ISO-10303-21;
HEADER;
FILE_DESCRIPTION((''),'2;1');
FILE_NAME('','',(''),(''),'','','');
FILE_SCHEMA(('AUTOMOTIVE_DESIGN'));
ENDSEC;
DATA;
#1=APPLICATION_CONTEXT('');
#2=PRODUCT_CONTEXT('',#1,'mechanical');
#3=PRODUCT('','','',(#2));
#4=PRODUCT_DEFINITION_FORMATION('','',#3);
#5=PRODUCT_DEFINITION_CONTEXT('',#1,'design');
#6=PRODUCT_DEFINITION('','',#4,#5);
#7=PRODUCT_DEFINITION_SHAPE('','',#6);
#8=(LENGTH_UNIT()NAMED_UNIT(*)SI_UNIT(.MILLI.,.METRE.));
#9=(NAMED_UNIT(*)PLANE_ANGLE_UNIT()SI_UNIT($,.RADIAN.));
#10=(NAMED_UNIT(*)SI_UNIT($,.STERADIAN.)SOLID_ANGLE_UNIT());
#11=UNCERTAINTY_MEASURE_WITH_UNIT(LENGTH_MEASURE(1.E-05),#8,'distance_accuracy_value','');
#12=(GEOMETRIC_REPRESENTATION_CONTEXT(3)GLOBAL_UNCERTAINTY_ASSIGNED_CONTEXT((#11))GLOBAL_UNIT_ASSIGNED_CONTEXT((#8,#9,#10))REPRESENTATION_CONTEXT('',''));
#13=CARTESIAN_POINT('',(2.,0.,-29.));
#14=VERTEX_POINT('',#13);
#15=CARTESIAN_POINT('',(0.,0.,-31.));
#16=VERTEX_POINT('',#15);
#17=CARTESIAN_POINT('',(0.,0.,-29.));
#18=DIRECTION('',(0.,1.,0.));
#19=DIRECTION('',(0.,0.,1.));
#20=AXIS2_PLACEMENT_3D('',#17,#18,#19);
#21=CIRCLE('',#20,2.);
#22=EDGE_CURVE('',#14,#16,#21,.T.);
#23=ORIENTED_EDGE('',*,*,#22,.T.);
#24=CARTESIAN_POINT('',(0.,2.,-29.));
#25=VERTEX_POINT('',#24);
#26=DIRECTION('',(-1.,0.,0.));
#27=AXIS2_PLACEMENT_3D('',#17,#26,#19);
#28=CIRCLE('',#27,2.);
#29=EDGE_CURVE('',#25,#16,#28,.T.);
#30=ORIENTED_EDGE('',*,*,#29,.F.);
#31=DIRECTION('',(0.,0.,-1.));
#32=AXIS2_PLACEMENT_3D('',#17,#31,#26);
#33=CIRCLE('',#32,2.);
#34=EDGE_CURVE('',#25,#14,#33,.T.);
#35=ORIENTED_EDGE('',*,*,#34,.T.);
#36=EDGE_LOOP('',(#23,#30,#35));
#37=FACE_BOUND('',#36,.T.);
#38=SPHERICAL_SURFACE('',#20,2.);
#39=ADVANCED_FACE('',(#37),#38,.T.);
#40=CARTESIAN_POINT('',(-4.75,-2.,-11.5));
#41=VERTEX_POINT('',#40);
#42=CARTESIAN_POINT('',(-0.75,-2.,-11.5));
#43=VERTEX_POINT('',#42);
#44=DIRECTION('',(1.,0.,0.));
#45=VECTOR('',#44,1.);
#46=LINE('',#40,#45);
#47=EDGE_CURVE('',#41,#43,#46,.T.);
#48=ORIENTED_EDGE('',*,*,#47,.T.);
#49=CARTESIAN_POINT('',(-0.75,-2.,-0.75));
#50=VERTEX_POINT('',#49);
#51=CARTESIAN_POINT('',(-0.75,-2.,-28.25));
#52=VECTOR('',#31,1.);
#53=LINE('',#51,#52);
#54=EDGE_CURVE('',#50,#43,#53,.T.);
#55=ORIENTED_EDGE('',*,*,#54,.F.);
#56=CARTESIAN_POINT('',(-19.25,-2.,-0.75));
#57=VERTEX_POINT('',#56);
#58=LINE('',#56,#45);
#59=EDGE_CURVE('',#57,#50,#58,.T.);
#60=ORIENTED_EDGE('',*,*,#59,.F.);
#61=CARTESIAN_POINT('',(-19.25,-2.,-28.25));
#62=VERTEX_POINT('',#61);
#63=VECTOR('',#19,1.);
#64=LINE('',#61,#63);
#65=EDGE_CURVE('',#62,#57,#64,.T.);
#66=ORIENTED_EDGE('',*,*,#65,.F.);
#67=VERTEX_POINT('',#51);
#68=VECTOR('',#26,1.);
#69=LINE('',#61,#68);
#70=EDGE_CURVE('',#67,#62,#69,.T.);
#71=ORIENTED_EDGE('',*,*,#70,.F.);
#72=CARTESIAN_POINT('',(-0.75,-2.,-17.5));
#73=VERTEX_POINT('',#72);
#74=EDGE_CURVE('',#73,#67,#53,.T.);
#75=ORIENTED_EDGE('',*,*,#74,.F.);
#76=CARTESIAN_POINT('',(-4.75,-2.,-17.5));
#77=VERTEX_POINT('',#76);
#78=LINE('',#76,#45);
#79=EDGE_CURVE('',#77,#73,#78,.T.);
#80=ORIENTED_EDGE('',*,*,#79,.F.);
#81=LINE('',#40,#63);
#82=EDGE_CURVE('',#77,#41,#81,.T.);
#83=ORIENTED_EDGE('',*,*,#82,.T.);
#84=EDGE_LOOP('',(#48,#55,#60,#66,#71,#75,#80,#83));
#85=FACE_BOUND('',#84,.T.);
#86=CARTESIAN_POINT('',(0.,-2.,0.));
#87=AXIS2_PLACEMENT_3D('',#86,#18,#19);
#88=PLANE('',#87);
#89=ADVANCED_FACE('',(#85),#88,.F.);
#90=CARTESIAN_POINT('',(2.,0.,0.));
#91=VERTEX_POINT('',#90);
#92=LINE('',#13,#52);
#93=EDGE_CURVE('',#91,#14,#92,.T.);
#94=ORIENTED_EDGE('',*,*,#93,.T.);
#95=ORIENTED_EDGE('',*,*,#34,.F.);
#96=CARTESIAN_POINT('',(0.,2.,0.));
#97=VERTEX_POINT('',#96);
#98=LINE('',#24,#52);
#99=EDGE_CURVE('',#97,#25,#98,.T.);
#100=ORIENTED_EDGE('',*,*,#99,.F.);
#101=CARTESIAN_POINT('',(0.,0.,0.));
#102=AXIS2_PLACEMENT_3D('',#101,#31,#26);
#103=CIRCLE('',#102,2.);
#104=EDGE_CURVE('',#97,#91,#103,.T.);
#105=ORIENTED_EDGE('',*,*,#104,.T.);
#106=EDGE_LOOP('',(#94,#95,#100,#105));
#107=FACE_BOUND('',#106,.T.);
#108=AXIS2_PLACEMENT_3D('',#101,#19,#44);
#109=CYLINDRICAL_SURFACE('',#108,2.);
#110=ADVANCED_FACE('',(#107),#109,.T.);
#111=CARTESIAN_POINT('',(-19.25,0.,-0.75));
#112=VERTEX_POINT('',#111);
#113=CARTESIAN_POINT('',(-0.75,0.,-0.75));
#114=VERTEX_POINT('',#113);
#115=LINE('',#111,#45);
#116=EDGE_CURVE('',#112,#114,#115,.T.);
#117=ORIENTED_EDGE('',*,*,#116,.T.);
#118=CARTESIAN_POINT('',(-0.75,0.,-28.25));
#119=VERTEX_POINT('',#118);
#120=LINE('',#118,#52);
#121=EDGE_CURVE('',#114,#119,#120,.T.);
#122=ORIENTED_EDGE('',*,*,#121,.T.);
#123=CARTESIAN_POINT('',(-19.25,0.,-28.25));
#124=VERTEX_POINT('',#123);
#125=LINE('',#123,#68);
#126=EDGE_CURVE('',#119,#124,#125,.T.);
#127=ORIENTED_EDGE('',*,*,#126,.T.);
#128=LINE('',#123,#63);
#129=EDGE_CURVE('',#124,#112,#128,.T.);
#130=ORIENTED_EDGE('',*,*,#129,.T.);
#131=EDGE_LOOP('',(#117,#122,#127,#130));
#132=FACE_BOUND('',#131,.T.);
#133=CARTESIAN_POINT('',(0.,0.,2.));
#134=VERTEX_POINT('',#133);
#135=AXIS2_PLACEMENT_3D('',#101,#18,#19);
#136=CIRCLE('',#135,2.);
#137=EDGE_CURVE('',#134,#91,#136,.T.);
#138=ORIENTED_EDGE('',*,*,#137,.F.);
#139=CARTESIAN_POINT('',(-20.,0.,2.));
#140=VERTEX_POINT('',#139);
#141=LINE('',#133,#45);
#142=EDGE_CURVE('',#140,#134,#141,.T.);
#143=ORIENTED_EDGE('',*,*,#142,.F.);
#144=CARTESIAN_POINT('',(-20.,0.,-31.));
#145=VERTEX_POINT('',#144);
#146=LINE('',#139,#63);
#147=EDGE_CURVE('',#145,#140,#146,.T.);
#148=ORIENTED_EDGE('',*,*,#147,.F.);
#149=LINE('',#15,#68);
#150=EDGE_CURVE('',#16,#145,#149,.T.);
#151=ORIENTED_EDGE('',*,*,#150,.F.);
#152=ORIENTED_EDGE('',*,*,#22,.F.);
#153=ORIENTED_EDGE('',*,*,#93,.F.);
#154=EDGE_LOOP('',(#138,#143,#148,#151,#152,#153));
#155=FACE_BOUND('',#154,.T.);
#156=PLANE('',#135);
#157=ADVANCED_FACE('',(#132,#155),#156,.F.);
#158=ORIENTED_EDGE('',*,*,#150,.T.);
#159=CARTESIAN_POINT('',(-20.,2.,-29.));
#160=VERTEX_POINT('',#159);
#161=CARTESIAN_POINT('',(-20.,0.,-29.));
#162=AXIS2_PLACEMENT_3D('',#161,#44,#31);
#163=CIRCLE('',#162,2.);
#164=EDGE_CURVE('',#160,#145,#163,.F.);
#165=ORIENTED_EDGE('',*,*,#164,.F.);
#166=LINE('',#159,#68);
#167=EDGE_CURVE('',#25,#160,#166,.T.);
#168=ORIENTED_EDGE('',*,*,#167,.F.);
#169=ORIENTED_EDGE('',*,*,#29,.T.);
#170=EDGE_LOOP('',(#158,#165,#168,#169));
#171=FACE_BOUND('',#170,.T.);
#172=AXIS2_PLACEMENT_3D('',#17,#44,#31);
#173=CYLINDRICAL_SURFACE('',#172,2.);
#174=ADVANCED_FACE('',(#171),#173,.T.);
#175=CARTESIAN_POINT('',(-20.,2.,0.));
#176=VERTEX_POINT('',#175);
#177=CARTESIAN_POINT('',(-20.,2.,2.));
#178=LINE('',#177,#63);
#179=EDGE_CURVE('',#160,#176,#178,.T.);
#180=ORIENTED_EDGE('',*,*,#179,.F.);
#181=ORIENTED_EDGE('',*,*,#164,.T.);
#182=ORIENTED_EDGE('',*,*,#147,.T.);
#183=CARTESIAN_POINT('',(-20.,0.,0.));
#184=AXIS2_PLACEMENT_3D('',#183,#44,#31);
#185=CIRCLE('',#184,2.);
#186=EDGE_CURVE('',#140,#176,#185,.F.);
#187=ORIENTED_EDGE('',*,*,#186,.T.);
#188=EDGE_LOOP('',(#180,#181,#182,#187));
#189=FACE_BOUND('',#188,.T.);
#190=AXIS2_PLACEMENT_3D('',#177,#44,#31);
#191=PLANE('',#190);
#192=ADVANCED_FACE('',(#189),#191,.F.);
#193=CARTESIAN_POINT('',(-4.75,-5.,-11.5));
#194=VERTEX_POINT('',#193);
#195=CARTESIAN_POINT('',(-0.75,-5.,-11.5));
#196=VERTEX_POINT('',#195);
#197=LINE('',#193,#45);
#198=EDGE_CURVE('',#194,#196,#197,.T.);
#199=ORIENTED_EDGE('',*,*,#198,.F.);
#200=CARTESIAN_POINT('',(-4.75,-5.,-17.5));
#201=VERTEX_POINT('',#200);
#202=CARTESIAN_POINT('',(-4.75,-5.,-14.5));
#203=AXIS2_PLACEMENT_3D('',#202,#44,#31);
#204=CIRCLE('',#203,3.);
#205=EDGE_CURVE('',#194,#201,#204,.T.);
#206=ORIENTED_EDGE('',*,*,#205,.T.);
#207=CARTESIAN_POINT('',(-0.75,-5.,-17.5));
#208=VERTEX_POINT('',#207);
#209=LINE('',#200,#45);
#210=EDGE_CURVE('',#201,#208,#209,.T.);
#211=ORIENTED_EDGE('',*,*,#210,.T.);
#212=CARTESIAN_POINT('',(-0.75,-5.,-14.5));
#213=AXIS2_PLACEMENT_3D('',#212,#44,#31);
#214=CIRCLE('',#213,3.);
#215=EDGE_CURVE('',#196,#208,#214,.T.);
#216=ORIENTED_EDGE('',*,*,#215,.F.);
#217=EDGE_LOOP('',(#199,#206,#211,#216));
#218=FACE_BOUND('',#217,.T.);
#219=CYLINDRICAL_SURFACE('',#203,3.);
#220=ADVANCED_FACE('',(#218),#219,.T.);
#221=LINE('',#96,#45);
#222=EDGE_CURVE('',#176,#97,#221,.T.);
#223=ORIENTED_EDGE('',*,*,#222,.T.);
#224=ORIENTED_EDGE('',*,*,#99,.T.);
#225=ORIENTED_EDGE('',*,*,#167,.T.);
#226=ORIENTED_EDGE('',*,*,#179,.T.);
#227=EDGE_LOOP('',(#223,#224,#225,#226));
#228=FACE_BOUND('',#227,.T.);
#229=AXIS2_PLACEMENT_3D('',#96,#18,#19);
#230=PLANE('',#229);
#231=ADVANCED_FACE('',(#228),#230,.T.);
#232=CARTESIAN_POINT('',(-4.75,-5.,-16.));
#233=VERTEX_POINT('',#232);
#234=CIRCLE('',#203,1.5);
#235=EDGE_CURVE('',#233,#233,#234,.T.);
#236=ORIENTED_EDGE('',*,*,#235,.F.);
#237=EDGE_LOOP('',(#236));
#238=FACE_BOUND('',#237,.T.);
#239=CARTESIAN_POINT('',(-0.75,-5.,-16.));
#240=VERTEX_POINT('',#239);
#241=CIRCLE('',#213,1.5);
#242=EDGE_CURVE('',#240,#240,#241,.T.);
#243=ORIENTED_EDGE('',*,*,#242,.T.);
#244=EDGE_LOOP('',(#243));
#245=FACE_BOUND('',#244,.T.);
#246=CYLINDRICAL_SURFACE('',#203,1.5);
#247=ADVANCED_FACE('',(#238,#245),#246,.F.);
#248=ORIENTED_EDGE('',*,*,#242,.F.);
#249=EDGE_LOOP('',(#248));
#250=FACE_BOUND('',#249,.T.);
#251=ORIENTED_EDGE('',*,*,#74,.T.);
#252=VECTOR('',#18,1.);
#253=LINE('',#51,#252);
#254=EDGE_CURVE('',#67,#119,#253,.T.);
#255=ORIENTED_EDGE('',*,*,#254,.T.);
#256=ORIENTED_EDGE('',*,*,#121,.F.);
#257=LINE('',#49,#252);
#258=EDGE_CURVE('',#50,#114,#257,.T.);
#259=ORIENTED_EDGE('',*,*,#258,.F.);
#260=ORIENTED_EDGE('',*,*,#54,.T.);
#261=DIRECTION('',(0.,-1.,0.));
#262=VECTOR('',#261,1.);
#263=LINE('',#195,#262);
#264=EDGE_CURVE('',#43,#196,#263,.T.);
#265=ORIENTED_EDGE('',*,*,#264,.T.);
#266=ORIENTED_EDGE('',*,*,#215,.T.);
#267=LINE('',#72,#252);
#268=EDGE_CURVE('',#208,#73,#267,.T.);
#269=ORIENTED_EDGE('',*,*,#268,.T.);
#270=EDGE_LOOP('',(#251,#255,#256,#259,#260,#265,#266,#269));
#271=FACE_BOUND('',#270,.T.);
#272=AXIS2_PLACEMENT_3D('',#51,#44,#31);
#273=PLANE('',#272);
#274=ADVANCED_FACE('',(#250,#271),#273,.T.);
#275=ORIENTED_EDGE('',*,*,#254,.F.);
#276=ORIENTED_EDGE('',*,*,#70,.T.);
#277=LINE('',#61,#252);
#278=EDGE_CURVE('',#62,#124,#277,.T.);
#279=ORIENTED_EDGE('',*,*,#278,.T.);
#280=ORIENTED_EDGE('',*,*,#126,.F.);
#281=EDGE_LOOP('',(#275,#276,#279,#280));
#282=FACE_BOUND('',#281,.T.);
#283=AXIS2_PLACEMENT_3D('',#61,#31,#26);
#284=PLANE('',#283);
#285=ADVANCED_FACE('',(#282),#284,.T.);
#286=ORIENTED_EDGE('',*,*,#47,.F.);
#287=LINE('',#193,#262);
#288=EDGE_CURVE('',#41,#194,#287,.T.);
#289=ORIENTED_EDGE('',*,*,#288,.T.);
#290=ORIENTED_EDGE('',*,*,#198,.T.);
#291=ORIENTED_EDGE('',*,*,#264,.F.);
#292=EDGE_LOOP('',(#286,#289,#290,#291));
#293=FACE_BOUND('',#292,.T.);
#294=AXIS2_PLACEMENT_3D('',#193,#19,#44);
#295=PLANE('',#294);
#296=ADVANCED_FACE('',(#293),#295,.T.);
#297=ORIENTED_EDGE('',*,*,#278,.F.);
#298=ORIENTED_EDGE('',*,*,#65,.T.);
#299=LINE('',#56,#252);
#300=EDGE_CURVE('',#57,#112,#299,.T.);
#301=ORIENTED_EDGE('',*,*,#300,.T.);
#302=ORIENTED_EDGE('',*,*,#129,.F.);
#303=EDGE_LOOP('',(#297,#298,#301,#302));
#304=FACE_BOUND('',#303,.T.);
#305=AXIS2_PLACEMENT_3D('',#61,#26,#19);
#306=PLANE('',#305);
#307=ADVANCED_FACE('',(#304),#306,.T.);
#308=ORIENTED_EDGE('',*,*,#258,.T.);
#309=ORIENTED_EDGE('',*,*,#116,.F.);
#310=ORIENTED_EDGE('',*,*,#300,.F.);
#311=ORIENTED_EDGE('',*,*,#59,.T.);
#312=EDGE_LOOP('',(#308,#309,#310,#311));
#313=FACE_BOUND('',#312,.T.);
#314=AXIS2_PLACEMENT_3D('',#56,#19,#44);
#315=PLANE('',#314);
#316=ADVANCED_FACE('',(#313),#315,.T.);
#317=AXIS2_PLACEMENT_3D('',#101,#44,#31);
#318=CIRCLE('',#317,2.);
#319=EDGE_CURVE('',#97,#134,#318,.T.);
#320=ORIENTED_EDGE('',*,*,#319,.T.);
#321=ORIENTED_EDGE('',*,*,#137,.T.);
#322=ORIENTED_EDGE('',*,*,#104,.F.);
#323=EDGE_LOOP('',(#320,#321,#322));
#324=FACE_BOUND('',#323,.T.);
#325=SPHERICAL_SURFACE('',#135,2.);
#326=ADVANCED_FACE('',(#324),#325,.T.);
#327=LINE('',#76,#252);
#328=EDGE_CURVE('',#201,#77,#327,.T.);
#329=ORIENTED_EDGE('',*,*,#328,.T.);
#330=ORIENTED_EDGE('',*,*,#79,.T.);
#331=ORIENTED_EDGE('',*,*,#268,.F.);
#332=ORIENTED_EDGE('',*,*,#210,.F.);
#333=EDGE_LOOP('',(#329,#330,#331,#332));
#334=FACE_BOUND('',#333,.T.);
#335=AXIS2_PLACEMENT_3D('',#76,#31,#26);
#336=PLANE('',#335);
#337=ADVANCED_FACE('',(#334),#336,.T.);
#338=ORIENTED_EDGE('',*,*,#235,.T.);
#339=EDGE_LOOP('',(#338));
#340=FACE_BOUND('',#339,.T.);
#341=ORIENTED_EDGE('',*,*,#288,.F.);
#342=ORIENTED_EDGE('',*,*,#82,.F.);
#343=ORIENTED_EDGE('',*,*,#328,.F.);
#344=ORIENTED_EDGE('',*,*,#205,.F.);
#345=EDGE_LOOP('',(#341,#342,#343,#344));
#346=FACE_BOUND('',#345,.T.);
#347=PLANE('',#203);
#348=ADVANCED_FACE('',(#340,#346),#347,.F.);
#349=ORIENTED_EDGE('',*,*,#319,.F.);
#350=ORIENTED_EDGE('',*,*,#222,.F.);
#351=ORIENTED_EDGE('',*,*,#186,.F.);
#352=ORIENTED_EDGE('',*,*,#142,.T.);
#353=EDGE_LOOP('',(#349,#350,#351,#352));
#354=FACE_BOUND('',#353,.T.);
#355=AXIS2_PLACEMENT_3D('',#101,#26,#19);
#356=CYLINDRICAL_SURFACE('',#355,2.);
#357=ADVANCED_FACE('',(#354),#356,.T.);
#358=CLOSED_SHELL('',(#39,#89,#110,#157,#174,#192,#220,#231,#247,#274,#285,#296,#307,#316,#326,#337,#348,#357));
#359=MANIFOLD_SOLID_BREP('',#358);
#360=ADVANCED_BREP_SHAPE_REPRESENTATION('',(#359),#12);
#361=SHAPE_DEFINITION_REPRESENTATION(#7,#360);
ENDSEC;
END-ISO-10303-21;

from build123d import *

# Parameters (mm, degrees)
SKETCH1_W           = 18.5
SKETCH1_H           = 27.5
BOSS_EXTRUDE1_DEPTH = 2
SKETCH3_R           = 1.5
BOSS_EXTRUDE2_DEPTH = 4
BOSS_EXTRUDE3_DEPTH = 2
FILLET1_R           = 2


with BuildPart() as part:
    # Sketch1 → Boss-Extrude1 (new body)
    with BuildSketch(Plane(origin=(0, 0, 0), x_dir=(1, 0, 0), z_dir=(0, 1, 0))):
        with Locations((-10, 14.5)):
            Rectangle(SKETCH1_W, SKETCH1_H)
    extrude(amount=-BOSS_EXTRUDE1_DEPTH)

    # Sketch3 → Boss-Extrude2 (add)
    with BuildSketch(Plane(origin=(-0.75, 0, 0), x_dir=(0, 0, -1), z_dir=(1, 0, 0))):
        with BuildLine():
            Line((11.5, -5), (11.5, -2))
            Line((11.5, -2), (17.5, -2))
            Line((17.5, -2), (17.5, -5))
            ThreePointArc((17.5, -5), (14.5, -8), (11.5, -5))
        make_face()
        with Locations((14.5, -5)):
            Circle(SKETCH3_R, mode=Mode.SUBTRACT)
    extrude(amount=-BOSS_EXTRUDE2_DEPTH)

    # Sketch4 → Boss-Extrude3 (add)
    with BuildSketch(Plane(origin=(0, 0, 0), x_dir=(1, 0, 0), z_dir=(0, 1, 0))):
        with BuildLine():
            Line((0, -2), (-20, -2))
            Line((-20, -2), (-20, 31))
            Line((-20, 31), (0, 31))
            ThreePointArc((0, 31), (1.414213562, 30.414213562), (2, 29))
            Line((2, 29), (2, 0))
            ThreePointArc((2, 0), (1.414213562, -1.414213562), (0, -2))
        make_face()
    extrude(amount=BOSS_EXTRUDE3_DEPTH)

    # Fillet1
    fillet1_edges = [part.edges().sort_by_distance(p)[0] for p in [
        (-10, 2, -31),
        (1.414213562, 2, -30.414213562),
        (2, 2, -14.5),
        (1.414213562, 2, 1.414213562),
        (-10, 2, 2),
    ]]
    fillet(fillet1_edges, radius=FILLET1_R - 0.0001)  # a hair under: the kernel refuses the full size


solid = part.part
